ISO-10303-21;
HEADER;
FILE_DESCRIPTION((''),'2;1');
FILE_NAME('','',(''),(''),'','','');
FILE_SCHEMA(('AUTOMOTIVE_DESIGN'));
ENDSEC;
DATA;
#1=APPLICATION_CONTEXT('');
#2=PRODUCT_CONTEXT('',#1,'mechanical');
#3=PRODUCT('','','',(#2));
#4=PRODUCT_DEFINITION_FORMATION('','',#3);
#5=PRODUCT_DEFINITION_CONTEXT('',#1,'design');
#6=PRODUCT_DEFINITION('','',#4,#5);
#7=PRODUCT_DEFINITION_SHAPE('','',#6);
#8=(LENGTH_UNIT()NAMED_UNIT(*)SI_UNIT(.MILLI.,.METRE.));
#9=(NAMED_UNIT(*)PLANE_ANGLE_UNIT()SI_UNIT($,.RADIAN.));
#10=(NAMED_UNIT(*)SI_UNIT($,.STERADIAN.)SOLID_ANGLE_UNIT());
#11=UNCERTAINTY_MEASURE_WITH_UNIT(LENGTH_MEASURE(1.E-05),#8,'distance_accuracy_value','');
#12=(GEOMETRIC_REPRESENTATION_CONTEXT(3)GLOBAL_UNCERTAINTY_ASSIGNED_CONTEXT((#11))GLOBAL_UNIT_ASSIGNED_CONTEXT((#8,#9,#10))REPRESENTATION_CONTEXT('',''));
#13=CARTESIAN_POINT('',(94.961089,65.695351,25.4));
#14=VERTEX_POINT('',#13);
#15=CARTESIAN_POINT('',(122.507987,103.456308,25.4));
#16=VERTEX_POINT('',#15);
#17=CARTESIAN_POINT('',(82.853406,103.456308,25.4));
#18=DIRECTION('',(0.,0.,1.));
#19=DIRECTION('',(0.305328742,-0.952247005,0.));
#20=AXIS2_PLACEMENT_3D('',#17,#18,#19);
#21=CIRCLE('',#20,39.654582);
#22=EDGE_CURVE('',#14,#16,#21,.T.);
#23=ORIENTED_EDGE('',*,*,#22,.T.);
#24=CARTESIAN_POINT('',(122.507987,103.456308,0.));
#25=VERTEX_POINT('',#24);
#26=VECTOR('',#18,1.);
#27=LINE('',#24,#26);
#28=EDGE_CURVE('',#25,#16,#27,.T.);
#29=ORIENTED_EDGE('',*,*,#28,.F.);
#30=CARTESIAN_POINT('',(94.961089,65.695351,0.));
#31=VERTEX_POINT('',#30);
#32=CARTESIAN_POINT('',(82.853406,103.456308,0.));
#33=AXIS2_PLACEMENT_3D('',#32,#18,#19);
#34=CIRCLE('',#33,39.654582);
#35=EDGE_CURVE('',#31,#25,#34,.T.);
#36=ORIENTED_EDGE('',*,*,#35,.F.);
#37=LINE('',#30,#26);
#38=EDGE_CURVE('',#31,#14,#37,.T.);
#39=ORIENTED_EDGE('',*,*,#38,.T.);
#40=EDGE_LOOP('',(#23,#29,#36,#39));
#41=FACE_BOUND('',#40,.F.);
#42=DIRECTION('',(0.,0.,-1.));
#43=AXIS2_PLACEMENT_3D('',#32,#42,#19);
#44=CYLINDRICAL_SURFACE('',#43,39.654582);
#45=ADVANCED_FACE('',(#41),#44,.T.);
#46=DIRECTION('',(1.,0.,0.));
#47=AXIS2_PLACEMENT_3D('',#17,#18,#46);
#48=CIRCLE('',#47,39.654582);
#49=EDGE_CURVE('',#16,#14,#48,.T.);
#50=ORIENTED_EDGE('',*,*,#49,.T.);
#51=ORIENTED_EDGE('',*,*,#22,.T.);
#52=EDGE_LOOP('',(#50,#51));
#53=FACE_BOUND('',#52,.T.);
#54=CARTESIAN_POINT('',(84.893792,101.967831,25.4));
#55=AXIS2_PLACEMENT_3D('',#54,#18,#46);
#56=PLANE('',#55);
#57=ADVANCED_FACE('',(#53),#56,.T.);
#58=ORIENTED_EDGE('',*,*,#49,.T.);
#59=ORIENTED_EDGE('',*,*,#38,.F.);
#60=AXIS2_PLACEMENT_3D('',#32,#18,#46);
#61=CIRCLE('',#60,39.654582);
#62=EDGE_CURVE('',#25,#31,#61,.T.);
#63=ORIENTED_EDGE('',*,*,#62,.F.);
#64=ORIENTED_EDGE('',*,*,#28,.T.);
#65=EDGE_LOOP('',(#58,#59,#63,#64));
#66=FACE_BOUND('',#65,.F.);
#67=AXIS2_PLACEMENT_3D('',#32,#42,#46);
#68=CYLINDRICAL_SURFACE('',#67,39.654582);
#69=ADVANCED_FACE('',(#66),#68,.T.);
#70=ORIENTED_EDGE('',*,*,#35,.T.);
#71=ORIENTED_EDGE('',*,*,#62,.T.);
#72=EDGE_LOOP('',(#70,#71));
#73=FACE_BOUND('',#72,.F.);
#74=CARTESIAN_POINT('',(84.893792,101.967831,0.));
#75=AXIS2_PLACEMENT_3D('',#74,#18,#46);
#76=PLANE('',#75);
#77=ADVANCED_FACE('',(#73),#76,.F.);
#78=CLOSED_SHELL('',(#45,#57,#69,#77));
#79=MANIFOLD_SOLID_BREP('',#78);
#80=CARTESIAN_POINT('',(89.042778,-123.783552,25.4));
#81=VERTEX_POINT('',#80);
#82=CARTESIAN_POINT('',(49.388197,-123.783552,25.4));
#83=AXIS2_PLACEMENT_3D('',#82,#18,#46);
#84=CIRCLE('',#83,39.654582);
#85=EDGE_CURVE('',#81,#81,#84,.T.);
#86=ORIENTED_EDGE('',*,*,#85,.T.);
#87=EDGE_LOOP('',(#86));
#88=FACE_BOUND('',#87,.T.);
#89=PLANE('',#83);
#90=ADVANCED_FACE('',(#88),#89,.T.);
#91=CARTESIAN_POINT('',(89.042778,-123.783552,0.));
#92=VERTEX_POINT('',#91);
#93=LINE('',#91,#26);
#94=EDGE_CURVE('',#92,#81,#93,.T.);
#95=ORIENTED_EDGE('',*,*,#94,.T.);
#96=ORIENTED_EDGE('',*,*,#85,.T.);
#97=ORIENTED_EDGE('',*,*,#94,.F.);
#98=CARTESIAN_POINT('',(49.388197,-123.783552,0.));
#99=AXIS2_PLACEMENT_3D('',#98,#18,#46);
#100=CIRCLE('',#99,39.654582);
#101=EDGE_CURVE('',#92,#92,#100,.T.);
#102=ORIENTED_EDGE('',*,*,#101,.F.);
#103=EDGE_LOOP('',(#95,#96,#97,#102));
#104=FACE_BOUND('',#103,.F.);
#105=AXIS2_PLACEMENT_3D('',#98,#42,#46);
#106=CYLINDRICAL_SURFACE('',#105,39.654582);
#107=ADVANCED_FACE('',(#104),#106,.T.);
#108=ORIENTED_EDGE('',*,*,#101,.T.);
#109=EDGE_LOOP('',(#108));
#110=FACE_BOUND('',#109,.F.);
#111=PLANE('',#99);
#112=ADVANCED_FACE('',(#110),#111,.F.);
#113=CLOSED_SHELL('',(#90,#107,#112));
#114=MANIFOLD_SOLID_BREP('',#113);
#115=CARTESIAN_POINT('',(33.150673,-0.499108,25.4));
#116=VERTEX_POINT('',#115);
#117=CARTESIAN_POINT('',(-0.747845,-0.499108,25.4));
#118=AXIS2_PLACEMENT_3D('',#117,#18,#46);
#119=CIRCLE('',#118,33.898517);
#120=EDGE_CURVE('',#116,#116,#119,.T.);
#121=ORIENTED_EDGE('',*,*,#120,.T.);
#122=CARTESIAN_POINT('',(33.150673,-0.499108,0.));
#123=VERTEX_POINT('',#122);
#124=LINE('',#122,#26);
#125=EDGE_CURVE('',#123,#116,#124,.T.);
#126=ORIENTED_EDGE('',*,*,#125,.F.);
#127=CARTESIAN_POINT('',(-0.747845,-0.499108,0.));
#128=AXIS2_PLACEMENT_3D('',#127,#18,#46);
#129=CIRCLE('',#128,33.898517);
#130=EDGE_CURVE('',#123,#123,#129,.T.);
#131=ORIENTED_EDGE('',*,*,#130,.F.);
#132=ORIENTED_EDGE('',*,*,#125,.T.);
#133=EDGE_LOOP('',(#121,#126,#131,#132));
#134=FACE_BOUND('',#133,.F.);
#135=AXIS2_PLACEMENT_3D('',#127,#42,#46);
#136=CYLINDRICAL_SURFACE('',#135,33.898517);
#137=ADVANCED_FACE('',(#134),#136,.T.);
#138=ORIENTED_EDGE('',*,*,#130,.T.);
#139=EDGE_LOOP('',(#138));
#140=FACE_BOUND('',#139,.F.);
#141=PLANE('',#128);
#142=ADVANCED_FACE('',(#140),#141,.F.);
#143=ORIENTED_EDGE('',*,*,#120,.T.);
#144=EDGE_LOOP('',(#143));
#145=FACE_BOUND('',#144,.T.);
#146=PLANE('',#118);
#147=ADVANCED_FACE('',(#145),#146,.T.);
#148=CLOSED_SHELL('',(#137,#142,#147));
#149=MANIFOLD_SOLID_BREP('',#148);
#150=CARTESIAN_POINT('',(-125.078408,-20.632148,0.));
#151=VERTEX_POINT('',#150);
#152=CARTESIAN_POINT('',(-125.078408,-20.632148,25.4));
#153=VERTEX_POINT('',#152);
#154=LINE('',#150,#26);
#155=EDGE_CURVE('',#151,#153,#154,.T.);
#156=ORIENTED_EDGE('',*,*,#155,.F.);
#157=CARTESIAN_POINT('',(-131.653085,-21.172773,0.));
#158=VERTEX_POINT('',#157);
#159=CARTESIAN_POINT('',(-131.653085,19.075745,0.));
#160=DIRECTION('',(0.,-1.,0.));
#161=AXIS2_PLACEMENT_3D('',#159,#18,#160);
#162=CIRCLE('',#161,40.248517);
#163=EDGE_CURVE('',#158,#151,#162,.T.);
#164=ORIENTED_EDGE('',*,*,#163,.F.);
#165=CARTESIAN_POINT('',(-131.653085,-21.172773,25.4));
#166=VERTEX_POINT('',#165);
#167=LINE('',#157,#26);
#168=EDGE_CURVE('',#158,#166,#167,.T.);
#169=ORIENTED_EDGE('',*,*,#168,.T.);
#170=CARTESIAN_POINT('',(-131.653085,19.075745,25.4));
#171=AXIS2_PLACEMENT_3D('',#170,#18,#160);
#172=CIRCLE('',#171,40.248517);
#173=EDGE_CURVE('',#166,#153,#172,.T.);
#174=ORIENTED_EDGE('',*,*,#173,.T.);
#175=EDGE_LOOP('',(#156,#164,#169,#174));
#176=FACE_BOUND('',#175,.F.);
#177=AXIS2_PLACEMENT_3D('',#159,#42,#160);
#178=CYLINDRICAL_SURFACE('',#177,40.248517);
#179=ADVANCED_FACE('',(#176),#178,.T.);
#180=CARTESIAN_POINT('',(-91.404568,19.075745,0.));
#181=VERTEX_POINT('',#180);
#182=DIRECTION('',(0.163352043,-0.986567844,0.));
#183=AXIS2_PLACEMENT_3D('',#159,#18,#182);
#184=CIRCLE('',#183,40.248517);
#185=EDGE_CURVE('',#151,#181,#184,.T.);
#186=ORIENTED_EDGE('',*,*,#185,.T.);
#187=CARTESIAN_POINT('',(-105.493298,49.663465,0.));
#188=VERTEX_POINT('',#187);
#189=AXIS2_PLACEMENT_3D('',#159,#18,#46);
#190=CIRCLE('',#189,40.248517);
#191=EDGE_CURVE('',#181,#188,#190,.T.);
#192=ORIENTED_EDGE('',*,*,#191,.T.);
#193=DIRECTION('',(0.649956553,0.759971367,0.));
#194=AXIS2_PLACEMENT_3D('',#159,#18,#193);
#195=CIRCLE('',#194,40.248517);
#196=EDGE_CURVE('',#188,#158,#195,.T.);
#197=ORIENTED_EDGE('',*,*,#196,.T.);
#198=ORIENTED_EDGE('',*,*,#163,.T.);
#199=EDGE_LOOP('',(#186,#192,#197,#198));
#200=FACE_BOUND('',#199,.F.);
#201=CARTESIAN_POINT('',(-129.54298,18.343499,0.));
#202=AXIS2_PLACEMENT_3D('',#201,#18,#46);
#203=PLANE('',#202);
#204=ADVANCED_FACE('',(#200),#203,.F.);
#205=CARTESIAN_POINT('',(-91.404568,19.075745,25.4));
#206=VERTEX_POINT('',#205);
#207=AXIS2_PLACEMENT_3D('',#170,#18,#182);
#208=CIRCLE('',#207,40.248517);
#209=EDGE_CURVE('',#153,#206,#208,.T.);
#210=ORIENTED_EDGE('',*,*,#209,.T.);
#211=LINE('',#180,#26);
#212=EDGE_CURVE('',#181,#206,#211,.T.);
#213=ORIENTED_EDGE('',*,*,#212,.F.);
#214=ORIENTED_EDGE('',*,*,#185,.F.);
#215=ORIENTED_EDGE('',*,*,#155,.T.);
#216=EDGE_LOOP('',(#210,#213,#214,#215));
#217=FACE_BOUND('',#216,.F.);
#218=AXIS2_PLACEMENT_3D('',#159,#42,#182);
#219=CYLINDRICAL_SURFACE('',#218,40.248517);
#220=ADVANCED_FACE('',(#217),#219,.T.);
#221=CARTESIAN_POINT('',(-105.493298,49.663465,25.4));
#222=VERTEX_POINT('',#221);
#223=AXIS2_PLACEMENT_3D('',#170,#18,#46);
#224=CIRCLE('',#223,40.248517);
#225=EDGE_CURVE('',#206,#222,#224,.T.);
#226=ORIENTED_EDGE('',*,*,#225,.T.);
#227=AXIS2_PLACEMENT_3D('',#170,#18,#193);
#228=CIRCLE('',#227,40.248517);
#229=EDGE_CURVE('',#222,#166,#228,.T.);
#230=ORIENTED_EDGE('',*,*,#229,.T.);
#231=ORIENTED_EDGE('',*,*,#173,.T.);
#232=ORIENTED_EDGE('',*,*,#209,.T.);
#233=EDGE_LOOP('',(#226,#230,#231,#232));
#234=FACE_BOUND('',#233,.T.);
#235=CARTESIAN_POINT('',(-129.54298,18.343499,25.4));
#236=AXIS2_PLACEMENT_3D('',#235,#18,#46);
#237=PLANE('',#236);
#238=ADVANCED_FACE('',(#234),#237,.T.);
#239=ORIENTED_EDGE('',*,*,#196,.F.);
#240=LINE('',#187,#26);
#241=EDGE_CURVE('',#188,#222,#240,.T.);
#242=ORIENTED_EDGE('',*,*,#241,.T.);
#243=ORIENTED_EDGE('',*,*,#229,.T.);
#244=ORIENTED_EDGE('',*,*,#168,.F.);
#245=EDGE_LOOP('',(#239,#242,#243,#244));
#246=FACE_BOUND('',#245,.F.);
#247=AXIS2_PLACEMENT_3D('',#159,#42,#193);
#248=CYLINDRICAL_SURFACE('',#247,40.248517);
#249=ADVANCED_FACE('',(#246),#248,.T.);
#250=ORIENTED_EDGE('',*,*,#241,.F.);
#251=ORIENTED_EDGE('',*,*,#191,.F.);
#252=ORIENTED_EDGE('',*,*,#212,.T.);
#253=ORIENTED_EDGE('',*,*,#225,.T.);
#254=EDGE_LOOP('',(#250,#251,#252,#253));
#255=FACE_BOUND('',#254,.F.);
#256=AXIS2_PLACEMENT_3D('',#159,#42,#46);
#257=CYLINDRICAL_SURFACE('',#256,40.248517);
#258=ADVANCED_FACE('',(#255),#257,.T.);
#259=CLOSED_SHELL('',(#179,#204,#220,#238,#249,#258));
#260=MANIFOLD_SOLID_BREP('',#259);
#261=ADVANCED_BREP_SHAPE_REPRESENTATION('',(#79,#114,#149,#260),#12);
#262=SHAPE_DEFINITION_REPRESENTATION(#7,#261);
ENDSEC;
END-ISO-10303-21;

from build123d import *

# Parameters (mm, degrees)
F0_R     = 33.3045819347
F1_DEPTH = 25.4
F0_R_2   = 33.8985173745


with BuildPart() as f1:
    # F0 (on Top) → F1 (new body)
    with BuildSketch(Plane.XY):
        with BuildLine():
            ThreePointArc((10.1881658678, -117.7966108428), (46.3861106689, -163.3243326291), (89.0427784966, -123.7835517983))
            ThreePointArc((89.0427784966, -123.7835517983), (52.3902824548, -84.2427709675), (10.1881658678, -117.7966108428))
        make_face()
        with Locations((49.3881965618, -123.7835517983)):
            Circle(F0_R, mode=Mode.SUBTRACT)
        with Locations((49.3881965618, -123.7835517983)):
            Circle(F0_R)
    extrude(amount=F1_DEPTH)


with BuildPart() as f1b:
    # F0 (on Top) → F1, piece 2 (new body)
    with BuildSketch(Plane.XY):
        with BuildLine():
            ThreePointArc((94.9610891571, 65.6953507789), (114.8894087237, 80.085805582), (122.5079874693, 103.4563076751))
            ThreePointArc((122.5079874693, 103.4563076751), (50.8174023454, 126.8268097682), (94.9610891571, 65.6953507789))
        make_face()
        with Locations((82.8534055346, 103.4563076751)):
            Circle(F0_R, mode=Mode.SUBTRACT)
        with Locations((82.8534055346, 103.4563076751)):
            Circle(F0_R)
    extrude(amount=F1_DEPTH)


with BuildPart() as f1c:
    # F0 (on Top) → F1, piece 3 (new body)
    with BuildSketch(Plane.XY):
        with BuildLine():
            ThreePointArc((-131.653085351, -21.1727726474), (-128.3691135331, -20.8615140587), (-125.0784078119, -20.6321482679))
            ThreePointArc((-125.0784078119, -20.6321482679), (-100.9564717429, -6.9561792095), (-91.4045679764, 19.0757447272))
            ThreePointArc((-91.4045679764, 19.0757447272), (-95.0960352936, 35.9139525283), (-105.4932977209, 49.6634654987))
            ThreePointArc((-105.4932977209, 49.6634654987), (-169.4092342659, 33.0190718037), (-131.653085351, -21.1727726474))
        make_face()
        with Locations((-131.653085351, 19.0757447272)):
            Circle(F0_R_2, mode=Mode.SUBTRACT)
        with Locations((-131.653085351, 19.0757447272)):
            Circle(F0_R_2)
        with BuildLine():
            ThreePointArc((-131.653085351, -21.1727726474), (-128.3546516521, -21.0373888575), (-125.0784078119, -20.6321482679))
            ThreePointArc((-125.0784078119, -20.6321482679), (-128.3691135331, -20.8615140587), (-131.653085351, -21.1727726474))
        make_face()
    extrude(amount=F1_DEPTH)


with BuildPart() as f1d:
    # F0 (on Top) → F1, piece 4 (new body)
    with BuildSketch(Plane.XY):
        with Locations((-0.7478448097, -0.4991076421)):
            Circle(F0_R_2)
    extrude(amount=F1_DEPTH)


solid = Compound([f1.part, f1b.part, f1c.part, f1d.part])
